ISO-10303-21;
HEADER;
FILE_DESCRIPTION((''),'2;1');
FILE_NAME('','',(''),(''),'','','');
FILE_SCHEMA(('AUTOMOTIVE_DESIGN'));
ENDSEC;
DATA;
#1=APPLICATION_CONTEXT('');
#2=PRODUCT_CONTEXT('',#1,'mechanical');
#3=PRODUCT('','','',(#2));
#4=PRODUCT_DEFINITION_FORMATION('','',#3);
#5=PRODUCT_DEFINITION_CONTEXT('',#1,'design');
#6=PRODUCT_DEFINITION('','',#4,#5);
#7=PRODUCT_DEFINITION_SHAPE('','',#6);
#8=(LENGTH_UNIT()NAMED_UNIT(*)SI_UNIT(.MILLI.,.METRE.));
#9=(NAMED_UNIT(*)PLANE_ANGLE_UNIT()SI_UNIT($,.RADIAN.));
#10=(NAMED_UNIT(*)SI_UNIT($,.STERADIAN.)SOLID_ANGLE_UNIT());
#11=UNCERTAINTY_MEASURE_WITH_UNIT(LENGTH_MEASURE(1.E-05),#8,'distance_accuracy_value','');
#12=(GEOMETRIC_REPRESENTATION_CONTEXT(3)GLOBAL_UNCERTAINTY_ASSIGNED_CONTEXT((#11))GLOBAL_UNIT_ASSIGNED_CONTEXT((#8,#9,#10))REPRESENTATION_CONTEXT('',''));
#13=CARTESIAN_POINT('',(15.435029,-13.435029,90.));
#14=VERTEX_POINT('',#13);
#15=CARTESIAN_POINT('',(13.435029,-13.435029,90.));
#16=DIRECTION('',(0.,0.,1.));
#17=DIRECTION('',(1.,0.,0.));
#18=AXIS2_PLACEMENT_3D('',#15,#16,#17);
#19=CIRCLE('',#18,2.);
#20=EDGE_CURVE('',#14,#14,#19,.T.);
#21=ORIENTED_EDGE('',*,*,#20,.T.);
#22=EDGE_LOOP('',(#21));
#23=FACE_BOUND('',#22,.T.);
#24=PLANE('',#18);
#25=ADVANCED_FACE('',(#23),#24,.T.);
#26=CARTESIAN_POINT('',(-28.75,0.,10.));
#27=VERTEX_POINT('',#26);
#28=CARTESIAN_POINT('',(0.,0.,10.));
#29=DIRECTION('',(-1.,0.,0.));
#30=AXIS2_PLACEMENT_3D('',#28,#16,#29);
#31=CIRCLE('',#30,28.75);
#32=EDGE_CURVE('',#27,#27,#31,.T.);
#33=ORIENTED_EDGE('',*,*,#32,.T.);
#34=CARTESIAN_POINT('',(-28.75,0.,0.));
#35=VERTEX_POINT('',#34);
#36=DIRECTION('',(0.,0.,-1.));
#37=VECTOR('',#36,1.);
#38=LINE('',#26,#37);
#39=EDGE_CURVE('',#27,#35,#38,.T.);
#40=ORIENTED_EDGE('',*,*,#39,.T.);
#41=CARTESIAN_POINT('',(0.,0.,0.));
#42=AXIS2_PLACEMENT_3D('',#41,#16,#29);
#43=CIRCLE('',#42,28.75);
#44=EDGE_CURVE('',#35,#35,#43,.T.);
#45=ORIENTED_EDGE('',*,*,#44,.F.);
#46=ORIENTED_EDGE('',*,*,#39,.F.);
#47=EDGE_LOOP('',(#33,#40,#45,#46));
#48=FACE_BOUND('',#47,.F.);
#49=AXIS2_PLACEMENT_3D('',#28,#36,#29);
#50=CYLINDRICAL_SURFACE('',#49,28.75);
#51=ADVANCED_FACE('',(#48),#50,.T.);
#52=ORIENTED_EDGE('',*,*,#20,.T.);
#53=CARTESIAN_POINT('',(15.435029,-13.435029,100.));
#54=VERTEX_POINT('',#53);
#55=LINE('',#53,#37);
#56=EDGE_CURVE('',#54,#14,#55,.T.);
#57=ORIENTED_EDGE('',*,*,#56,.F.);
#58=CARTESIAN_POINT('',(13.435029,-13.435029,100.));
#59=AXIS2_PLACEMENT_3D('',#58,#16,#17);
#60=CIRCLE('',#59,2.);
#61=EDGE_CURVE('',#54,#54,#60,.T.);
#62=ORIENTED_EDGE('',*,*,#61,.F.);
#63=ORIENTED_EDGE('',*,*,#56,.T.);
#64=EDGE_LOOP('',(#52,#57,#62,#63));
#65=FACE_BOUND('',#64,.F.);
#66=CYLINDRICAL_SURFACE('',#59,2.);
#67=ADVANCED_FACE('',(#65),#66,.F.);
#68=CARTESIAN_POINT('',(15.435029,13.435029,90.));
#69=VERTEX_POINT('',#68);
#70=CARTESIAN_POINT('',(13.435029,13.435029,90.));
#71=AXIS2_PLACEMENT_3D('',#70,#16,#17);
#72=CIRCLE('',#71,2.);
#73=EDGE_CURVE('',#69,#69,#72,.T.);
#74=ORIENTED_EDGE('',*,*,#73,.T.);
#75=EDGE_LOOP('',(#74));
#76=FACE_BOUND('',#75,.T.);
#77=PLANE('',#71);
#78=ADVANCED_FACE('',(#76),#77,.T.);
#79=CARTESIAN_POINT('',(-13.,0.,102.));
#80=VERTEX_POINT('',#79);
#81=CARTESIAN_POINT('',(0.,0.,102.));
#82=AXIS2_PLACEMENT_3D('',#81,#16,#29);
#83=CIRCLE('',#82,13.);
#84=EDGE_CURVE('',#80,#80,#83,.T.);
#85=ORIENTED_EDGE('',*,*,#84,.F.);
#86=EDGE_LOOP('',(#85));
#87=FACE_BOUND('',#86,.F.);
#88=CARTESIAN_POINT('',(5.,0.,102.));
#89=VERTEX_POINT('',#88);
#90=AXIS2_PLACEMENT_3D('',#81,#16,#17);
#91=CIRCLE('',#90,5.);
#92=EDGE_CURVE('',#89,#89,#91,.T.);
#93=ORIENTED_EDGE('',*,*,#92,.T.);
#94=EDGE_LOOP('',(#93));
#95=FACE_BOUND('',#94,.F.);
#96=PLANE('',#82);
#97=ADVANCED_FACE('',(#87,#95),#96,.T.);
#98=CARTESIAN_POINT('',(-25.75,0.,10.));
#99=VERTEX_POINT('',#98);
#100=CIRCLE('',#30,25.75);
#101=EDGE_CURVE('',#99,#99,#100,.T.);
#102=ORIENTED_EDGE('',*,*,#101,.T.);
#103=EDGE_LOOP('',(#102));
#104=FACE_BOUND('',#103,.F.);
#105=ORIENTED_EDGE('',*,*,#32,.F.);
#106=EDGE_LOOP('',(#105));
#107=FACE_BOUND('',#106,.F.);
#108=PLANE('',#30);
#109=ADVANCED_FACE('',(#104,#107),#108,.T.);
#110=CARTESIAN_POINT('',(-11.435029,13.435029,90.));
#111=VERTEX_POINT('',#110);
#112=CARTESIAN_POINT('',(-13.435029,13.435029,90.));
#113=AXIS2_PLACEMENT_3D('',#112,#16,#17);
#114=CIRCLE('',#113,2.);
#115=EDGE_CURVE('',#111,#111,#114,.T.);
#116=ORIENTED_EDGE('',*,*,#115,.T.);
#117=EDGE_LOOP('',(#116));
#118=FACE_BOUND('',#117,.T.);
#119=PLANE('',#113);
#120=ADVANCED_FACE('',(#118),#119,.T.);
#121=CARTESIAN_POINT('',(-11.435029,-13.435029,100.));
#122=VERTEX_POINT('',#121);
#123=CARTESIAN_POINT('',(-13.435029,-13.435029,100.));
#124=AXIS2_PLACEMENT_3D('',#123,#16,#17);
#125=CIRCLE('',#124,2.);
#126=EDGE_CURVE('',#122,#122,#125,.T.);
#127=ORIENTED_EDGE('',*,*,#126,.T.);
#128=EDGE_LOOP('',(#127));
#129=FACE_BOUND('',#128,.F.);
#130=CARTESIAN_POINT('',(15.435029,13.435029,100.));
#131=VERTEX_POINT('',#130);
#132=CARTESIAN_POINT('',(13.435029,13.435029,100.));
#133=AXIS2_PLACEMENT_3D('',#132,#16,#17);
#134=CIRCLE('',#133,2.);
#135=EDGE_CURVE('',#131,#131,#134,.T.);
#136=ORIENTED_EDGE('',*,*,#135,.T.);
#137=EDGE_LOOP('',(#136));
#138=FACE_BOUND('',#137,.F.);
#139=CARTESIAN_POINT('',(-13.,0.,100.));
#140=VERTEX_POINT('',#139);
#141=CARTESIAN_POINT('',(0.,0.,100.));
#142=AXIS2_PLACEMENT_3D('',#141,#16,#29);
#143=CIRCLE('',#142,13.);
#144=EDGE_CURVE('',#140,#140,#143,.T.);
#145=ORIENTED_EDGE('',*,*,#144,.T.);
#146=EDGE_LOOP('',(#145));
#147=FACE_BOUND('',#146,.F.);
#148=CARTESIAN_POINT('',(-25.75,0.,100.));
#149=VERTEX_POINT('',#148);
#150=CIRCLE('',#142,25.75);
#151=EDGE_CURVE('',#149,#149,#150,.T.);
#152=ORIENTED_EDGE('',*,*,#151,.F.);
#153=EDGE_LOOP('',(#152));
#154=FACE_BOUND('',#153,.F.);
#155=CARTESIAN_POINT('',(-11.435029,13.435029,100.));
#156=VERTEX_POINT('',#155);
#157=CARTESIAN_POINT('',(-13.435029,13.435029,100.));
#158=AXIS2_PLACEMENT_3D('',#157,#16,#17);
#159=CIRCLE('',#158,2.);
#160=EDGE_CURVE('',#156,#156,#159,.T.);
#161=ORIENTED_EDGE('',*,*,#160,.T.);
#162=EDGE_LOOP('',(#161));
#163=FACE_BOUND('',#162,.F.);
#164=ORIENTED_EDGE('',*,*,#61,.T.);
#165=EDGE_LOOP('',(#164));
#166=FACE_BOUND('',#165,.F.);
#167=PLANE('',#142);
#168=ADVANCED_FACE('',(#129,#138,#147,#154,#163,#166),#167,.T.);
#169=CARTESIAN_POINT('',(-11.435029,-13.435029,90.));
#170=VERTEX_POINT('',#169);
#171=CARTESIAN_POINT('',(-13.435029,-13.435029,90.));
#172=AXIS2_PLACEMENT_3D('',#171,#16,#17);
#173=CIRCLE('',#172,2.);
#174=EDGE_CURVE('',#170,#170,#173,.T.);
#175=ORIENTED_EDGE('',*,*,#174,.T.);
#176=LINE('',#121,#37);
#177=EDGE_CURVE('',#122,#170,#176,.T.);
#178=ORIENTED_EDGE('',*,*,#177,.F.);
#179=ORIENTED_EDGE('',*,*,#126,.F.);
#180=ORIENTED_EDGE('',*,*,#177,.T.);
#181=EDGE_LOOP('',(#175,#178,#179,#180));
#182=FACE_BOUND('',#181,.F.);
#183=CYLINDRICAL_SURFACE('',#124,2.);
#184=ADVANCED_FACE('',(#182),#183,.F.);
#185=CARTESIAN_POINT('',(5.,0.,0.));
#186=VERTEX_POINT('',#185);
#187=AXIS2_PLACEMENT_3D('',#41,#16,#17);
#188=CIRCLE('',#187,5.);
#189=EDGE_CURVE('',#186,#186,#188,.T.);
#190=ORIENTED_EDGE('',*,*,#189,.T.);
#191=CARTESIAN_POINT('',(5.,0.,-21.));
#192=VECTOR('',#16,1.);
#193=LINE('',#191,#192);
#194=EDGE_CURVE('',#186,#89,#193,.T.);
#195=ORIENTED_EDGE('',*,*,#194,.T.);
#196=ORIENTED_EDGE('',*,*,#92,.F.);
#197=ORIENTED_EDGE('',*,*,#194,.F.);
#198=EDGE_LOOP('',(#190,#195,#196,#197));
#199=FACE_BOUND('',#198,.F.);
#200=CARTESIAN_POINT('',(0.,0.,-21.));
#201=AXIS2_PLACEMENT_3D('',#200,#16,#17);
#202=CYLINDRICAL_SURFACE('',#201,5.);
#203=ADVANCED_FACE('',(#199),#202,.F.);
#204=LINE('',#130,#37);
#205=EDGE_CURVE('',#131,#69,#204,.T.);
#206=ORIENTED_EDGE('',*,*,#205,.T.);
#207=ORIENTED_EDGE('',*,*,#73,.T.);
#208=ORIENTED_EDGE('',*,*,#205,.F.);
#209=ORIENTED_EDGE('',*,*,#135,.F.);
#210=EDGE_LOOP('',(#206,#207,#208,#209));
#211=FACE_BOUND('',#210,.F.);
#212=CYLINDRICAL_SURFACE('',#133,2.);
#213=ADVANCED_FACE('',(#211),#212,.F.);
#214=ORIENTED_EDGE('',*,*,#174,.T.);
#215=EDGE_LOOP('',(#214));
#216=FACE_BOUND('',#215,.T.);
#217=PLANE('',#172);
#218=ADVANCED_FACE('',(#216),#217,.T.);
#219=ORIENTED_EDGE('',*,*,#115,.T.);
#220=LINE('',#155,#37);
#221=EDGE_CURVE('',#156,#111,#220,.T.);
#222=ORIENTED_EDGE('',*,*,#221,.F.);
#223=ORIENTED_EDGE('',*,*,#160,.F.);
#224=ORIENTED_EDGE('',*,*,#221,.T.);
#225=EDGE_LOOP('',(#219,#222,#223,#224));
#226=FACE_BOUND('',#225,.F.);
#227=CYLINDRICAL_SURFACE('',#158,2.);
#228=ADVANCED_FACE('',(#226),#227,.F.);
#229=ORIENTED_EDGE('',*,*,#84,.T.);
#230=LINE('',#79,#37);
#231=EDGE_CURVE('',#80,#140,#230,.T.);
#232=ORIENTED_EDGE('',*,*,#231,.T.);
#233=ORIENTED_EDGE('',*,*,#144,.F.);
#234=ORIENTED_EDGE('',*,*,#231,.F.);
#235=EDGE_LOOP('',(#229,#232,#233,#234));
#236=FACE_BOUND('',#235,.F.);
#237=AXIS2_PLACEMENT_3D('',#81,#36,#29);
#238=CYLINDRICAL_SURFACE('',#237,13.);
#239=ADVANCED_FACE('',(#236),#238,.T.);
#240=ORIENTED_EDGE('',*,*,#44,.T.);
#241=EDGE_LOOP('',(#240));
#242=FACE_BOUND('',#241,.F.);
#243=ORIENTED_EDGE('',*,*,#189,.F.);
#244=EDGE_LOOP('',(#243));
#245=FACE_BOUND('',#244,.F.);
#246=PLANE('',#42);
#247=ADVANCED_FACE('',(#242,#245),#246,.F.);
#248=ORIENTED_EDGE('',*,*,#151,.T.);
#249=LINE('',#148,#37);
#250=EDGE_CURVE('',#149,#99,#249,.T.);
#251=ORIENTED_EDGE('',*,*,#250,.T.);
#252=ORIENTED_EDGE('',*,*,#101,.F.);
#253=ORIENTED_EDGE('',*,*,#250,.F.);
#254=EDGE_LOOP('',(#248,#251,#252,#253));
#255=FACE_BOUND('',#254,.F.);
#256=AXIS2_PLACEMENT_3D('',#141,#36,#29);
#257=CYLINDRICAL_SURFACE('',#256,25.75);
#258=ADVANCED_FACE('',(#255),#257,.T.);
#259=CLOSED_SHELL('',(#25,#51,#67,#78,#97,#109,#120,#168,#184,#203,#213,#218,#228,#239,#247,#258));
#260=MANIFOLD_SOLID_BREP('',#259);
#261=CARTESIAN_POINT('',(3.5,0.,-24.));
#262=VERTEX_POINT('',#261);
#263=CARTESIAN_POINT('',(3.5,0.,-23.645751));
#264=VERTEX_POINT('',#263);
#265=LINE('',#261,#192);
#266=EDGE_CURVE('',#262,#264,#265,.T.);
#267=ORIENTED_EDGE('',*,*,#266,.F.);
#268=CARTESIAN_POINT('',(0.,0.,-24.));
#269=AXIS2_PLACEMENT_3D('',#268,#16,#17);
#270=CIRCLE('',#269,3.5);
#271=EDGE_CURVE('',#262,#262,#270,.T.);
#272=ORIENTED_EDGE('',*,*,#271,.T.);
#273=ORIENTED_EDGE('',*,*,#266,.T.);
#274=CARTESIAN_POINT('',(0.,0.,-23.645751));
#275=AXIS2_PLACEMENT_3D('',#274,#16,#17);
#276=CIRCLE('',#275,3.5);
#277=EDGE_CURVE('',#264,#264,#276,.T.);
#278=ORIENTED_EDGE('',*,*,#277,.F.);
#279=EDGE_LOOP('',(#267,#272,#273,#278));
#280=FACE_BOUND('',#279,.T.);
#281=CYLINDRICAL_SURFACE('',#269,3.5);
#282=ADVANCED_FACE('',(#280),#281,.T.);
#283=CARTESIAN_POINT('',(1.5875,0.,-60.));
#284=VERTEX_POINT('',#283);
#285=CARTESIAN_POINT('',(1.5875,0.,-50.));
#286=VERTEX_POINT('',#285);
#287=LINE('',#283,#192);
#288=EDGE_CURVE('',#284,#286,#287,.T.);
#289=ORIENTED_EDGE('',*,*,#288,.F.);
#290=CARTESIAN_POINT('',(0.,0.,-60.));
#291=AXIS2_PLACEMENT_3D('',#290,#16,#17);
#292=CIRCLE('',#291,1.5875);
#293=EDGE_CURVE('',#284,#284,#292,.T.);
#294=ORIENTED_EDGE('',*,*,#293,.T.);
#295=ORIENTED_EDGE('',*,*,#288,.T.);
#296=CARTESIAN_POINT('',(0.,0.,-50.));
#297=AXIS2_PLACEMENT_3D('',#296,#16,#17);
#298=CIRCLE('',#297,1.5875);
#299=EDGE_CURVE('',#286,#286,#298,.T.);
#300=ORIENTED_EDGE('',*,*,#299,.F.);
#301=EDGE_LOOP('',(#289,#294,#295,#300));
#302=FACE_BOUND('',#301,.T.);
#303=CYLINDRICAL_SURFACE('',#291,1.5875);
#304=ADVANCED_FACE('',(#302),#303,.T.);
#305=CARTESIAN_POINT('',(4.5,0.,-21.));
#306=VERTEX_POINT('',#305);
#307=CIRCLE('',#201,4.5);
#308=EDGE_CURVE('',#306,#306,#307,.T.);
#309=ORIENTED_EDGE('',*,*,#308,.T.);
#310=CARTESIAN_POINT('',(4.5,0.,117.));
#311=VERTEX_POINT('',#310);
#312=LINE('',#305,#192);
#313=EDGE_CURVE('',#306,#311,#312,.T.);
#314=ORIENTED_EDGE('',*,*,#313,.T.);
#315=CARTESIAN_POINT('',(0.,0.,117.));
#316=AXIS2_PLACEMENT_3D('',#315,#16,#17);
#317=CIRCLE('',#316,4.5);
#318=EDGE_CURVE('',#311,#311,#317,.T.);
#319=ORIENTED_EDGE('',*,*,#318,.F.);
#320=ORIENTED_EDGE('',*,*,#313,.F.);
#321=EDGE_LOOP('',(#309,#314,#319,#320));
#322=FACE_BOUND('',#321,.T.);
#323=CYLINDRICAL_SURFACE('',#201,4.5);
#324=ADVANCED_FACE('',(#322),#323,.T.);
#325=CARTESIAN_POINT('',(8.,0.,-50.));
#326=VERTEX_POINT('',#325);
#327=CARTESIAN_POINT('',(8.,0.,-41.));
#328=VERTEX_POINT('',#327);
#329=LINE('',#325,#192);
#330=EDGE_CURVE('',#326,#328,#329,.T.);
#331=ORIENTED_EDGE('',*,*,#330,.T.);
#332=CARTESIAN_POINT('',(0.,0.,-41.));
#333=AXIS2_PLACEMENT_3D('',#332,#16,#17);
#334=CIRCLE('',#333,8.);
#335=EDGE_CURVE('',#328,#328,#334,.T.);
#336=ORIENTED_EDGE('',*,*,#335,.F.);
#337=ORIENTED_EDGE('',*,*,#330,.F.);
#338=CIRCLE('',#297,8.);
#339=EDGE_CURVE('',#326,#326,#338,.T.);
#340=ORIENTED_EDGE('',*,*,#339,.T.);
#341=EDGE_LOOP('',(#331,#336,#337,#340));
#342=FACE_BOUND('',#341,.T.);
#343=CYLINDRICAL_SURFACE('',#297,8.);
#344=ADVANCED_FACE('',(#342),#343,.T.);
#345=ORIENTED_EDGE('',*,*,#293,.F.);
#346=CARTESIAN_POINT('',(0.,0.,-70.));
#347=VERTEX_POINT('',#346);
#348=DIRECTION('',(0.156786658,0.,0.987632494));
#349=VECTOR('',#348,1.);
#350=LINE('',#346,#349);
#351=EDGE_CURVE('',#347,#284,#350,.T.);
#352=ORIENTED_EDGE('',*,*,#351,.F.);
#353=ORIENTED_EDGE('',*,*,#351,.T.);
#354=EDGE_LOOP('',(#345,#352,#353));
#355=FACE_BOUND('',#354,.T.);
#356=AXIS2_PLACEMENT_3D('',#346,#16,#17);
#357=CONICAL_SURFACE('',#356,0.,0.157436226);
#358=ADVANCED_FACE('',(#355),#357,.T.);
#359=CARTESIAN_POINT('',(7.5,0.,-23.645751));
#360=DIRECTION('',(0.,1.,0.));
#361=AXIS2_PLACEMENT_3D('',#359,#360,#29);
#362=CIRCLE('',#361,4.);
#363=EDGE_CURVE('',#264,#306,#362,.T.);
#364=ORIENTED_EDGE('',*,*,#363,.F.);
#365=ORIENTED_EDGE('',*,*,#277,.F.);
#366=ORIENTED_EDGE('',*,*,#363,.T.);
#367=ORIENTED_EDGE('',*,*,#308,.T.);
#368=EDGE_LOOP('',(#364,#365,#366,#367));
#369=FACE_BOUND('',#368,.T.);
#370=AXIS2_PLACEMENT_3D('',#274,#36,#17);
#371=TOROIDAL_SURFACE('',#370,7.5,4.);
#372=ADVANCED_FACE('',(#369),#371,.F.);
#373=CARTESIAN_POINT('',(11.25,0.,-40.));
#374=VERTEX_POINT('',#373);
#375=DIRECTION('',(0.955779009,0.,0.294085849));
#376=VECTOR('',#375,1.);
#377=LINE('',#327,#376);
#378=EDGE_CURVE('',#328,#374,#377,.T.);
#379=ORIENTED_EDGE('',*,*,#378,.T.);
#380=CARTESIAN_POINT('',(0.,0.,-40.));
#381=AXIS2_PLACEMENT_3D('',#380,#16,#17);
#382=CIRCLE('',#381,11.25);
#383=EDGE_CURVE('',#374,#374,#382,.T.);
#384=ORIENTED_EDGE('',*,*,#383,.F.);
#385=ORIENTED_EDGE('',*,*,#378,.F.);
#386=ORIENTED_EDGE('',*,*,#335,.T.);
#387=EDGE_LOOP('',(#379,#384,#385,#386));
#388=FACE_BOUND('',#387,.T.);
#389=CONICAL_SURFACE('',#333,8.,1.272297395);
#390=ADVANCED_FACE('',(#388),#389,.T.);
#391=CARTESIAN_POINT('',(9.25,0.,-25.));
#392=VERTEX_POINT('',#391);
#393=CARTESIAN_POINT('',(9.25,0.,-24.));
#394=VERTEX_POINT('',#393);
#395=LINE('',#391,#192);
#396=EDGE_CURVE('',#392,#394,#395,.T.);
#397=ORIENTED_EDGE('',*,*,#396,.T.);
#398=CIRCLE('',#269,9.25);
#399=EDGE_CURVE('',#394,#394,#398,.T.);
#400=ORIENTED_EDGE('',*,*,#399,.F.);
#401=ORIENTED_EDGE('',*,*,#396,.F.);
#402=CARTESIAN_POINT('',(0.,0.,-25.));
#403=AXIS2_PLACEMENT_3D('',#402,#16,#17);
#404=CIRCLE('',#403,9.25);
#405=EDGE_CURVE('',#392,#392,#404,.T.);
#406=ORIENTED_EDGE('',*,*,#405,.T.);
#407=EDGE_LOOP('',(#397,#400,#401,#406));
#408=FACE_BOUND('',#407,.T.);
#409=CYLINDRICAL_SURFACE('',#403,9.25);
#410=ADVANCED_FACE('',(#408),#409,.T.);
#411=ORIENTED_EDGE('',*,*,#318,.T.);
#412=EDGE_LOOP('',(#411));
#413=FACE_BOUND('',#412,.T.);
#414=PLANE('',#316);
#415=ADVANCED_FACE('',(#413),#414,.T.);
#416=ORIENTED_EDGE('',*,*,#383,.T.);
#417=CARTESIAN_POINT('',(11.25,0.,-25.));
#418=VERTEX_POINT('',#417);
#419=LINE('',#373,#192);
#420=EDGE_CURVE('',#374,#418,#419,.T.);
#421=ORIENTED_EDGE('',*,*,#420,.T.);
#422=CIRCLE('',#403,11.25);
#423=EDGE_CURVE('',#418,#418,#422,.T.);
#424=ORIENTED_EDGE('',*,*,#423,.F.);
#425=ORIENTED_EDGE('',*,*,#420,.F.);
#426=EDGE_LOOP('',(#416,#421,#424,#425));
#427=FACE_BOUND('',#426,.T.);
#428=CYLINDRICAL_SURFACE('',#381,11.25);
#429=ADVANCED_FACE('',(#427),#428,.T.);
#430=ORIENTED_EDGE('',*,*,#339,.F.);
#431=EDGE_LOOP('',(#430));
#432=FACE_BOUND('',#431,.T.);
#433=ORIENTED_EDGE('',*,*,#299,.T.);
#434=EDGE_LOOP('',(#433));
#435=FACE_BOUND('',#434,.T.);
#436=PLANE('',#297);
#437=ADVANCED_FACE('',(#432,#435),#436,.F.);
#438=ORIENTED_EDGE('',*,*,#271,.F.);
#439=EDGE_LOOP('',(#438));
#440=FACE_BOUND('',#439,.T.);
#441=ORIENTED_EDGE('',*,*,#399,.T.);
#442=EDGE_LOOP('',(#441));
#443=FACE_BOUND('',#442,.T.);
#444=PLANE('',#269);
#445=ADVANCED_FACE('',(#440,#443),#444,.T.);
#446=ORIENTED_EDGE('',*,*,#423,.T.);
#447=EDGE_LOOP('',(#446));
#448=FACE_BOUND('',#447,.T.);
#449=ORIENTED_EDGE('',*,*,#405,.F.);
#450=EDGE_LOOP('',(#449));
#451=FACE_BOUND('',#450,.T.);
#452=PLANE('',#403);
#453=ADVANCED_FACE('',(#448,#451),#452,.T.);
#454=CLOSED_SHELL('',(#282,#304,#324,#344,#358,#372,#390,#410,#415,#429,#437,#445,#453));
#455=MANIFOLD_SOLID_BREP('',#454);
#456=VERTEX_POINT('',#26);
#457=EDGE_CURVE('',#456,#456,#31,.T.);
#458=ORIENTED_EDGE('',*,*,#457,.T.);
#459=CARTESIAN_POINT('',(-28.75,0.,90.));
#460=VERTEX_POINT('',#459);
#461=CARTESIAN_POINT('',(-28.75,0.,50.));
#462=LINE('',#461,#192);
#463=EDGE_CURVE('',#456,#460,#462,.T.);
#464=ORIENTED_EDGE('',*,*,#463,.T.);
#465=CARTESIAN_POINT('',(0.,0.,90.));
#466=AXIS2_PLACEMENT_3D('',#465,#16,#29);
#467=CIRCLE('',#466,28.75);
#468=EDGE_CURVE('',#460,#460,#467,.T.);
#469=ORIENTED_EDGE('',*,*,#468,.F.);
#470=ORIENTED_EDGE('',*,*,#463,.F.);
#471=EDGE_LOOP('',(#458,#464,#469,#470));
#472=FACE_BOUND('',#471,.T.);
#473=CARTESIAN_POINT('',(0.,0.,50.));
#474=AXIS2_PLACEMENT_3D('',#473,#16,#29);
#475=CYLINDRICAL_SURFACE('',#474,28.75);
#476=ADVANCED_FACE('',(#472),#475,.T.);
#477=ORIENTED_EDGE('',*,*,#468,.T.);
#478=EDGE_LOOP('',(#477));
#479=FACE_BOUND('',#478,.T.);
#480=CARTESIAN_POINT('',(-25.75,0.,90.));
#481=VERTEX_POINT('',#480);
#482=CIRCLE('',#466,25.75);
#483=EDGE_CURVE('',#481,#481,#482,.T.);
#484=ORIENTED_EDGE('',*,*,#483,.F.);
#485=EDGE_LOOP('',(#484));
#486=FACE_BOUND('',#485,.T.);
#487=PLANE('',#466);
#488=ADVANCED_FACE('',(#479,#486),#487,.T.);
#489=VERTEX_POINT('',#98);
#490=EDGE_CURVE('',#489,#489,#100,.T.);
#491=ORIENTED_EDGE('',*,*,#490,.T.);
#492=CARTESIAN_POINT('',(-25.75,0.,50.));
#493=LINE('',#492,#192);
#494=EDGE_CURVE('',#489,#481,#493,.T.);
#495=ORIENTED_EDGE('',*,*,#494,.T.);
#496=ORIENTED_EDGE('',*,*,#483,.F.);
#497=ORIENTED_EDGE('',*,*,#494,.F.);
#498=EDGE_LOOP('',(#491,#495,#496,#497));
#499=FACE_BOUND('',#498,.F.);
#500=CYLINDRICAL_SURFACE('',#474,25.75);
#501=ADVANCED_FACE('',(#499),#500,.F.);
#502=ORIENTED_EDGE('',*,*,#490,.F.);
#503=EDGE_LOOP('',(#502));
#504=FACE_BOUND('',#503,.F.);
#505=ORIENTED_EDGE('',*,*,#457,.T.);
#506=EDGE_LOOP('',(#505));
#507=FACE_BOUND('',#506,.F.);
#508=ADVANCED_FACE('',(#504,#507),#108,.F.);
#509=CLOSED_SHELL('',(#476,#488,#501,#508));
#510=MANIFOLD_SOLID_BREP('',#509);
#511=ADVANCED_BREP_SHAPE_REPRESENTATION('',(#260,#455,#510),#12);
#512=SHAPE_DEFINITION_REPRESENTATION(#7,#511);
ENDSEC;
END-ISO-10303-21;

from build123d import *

# Parameters (mm, degrees)
F0_W      = 3
F0_H      = 80
F4_OFFSET = 0.5
F6_R      = 2
F7_DEPTH  = 10


# Not quite as in the source:
# - a fillet or chamfer that OpenCascade refuses, or shapes differently, is made with other operations: its cross-section is extruded or revolved along the edge and cut away or added


with BuildPart() as f1:
    # F0 (on Front) → F1 (revolve)
    with BuildSketch(Plane.XZ):
        Polygon((0, 100), (0, 102), (-13, 102), (-13, 100), (-25.75, 100), (-25.75, 90), (-25.75, 10), (-28.75, 10), (-28.75, 0), (-25.75, 0), (0, 0), align=None)
    revolve(axis=Axis((0, 0, 33.5), (0, 0, 1)))


with BuildPart() as f2:
    # F0 (on Front) → F2 (revolve)
    with BuildSketch(Plane.XZ):
        Polygon((4.5, 117), (0, 117), (0, 102), (0, 100), (0, 0), (0, -50), (1.5875, -50), (8, -50), (8, -41), (11.25, -40), (11.25, -25), (9.25, -25), (9.25, -24), (3.5, -24), (3.5, -21), (4.5, -21), align=None)
        Polygon((1.5875, -50), (0, -50), (0, -70), (1.5875, -60), align=None)
    revolve(axis=Axis((0, 0, 33.5), (0, 0, 1)))


with BuildPart() as f3:
    # F0 (on Front) → F3 (revolve)
    with BuildSketch(Plane.XZ):
        with Locations((-27.25, 50)):
            Rectangle(F0_W, F0_H)
    revolve(axis=Axis((0, 0, 33.5), (0, 0, 1)))


with BuildPart() as f1_1:
    add(f1.part)

    # F4: cut F2, made larger all round first
    f4_tool = offset(f2.part, amount=F4_OFFSET, kind=Kind.INTERSECTION, mode=Mode.PRIVATE)
    add(f4_tool, mode=Mode.SUBTRACT)

    # F6 (on face) → F7 (cut)
    with BuildSketch(Plane.XY.offset(100)):
        with Locations((-13.4350288425, 13.4350288425)):
            Circle(F6_R)
        with Locations((13.4350288425, 13.4350288425)):
            Circle(F6_R)
        with Locations((13.4350288425, -13.4350288425)):
            Circle(F6_R)
        with Locations((-13.4350288425, -13.4350288425)):
            Circle(F6_R)
    extrude(amount=-F7_DEPTH, mode=Mode.SUBTRACT)


with BuildPart() as f2_1:
    add(f2.part)

    # F5: fillet of radius 4 on 1 edges, made by hand

    # F5_s1 → F5_t2 (revolve)
    with BuildSketch(Plane.XZ):
        with BuildLine():
            ThreePointArc((3.5, -23.6457513111), (3.7583426132, -22.2315377487), (4.5, -21))
            Line((4.5, -21), (3.5, -21))
            Line((3.5, -21), (3.5, -23.6457513111))
        make_face()
    revolve(axis=Axis((0, 0, -21), (0, 0, 1)))


solid = Compound([f3.part, f1_1.part, f2_1.part])
